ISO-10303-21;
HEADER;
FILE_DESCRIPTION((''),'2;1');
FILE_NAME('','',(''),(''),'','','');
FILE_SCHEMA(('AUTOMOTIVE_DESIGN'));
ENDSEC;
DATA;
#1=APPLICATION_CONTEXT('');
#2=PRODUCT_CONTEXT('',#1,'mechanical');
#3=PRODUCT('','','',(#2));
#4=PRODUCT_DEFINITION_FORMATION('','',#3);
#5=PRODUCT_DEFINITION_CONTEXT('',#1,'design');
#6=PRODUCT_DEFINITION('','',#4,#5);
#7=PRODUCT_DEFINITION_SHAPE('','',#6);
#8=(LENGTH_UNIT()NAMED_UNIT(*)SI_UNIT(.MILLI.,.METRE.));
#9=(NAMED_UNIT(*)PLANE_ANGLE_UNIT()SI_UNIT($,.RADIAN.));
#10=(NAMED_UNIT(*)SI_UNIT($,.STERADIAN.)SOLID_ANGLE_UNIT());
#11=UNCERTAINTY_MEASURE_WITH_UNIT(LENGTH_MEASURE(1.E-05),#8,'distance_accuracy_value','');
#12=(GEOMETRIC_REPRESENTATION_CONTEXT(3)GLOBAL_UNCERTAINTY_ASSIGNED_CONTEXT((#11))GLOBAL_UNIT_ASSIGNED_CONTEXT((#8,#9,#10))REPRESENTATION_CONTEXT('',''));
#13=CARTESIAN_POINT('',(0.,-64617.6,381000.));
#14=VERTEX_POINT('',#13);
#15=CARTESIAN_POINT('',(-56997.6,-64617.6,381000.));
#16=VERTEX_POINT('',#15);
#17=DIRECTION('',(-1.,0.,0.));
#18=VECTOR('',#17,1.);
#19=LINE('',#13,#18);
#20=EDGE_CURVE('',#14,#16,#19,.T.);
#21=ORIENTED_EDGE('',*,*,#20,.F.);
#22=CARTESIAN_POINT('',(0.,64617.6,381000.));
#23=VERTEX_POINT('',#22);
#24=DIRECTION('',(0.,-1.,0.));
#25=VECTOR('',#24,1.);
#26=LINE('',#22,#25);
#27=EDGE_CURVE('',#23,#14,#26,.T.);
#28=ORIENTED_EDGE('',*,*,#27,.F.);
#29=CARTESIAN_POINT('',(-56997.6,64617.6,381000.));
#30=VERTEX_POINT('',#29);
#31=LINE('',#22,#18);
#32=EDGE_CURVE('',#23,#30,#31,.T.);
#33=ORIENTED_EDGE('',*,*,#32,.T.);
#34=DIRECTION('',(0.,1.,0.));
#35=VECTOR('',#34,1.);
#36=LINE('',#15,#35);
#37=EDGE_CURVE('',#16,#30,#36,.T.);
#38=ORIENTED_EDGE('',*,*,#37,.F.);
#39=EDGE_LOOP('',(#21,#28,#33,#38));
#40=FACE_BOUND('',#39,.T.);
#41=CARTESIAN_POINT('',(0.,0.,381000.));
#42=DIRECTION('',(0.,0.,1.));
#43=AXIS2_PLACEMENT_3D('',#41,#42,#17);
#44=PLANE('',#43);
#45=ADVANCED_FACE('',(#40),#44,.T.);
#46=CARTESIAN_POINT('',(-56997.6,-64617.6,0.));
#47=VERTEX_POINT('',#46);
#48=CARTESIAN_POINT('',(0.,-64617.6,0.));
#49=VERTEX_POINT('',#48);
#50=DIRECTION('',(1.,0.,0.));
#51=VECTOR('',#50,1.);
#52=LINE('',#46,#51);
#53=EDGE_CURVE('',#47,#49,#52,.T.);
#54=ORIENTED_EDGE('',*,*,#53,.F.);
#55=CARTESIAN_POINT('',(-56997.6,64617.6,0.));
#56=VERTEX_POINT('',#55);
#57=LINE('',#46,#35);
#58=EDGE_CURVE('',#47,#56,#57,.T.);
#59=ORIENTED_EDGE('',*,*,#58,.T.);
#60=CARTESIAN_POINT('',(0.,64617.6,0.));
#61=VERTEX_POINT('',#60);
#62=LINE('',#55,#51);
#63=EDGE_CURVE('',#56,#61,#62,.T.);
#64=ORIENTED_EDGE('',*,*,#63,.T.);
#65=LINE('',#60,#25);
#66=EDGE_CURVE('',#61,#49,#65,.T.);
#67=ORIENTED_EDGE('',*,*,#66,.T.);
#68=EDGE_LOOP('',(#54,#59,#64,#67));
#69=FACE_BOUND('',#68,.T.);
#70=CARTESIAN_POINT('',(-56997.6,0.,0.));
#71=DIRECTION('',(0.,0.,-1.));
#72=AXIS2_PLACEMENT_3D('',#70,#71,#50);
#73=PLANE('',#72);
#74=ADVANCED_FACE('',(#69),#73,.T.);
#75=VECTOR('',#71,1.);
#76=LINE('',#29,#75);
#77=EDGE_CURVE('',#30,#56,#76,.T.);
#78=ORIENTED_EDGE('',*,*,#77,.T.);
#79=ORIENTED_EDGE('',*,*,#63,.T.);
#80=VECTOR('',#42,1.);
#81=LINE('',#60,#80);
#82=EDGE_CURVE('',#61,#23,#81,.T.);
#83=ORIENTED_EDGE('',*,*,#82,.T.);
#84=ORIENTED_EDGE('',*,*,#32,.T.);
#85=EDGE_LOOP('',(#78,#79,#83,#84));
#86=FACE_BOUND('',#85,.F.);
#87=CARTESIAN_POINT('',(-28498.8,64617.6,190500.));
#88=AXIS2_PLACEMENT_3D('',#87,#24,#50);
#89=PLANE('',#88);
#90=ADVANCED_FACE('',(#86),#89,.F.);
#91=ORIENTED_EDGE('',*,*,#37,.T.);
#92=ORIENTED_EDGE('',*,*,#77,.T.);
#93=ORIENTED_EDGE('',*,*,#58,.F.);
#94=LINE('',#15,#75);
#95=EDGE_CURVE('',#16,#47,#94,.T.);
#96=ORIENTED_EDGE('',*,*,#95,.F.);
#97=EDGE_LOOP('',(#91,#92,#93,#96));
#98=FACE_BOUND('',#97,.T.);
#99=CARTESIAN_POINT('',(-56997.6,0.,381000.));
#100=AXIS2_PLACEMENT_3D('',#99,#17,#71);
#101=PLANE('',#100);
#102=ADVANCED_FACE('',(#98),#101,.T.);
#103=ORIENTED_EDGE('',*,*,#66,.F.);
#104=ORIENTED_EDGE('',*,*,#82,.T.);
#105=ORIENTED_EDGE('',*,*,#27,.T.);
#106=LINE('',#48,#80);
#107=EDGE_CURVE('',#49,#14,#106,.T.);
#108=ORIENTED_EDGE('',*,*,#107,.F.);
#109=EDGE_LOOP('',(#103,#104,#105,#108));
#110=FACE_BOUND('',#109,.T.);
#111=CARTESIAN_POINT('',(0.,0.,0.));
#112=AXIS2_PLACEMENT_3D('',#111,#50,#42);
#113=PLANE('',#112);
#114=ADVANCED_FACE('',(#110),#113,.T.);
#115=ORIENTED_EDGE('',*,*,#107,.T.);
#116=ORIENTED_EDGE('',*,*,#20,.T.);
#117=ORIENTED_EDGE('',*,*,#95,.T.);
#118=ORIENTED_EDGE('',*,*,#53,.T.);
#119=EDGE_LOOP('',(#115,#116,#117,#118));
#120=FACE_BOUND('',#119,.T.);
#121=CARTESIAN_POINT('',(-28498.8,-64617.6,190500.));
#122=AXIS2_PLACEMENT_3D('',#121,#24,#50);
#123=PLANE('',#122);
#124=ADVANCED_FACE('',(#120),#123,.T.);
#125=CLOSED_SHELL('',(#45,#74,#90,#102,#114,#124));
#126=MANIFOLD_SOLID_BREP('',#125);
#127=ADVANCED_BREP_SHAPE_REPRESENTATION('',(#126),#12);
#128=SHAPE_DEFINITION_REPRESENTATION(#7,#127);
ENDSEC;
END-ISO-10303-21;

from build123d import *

# Parameters (mm, degrees)
F1_DEPTH = 64617.6


# Not quite as in the source:
# - the program builds the solid bodies; features that only make, move or delete a surface that nothing else refers to are left out


with BuildPart() as f1:
    # F0 (on Front) → F1 (new body, symmetric)
    with BuildSketch(Plane.XZ):
        Polygon((-56997.6, 0), (0, 0), (0, 381000), (-28498.8, 381000), (-56997.6, 381000), align=None)
    extrude(amount=F1_DEPTH, both=True)


solid = f1.part
